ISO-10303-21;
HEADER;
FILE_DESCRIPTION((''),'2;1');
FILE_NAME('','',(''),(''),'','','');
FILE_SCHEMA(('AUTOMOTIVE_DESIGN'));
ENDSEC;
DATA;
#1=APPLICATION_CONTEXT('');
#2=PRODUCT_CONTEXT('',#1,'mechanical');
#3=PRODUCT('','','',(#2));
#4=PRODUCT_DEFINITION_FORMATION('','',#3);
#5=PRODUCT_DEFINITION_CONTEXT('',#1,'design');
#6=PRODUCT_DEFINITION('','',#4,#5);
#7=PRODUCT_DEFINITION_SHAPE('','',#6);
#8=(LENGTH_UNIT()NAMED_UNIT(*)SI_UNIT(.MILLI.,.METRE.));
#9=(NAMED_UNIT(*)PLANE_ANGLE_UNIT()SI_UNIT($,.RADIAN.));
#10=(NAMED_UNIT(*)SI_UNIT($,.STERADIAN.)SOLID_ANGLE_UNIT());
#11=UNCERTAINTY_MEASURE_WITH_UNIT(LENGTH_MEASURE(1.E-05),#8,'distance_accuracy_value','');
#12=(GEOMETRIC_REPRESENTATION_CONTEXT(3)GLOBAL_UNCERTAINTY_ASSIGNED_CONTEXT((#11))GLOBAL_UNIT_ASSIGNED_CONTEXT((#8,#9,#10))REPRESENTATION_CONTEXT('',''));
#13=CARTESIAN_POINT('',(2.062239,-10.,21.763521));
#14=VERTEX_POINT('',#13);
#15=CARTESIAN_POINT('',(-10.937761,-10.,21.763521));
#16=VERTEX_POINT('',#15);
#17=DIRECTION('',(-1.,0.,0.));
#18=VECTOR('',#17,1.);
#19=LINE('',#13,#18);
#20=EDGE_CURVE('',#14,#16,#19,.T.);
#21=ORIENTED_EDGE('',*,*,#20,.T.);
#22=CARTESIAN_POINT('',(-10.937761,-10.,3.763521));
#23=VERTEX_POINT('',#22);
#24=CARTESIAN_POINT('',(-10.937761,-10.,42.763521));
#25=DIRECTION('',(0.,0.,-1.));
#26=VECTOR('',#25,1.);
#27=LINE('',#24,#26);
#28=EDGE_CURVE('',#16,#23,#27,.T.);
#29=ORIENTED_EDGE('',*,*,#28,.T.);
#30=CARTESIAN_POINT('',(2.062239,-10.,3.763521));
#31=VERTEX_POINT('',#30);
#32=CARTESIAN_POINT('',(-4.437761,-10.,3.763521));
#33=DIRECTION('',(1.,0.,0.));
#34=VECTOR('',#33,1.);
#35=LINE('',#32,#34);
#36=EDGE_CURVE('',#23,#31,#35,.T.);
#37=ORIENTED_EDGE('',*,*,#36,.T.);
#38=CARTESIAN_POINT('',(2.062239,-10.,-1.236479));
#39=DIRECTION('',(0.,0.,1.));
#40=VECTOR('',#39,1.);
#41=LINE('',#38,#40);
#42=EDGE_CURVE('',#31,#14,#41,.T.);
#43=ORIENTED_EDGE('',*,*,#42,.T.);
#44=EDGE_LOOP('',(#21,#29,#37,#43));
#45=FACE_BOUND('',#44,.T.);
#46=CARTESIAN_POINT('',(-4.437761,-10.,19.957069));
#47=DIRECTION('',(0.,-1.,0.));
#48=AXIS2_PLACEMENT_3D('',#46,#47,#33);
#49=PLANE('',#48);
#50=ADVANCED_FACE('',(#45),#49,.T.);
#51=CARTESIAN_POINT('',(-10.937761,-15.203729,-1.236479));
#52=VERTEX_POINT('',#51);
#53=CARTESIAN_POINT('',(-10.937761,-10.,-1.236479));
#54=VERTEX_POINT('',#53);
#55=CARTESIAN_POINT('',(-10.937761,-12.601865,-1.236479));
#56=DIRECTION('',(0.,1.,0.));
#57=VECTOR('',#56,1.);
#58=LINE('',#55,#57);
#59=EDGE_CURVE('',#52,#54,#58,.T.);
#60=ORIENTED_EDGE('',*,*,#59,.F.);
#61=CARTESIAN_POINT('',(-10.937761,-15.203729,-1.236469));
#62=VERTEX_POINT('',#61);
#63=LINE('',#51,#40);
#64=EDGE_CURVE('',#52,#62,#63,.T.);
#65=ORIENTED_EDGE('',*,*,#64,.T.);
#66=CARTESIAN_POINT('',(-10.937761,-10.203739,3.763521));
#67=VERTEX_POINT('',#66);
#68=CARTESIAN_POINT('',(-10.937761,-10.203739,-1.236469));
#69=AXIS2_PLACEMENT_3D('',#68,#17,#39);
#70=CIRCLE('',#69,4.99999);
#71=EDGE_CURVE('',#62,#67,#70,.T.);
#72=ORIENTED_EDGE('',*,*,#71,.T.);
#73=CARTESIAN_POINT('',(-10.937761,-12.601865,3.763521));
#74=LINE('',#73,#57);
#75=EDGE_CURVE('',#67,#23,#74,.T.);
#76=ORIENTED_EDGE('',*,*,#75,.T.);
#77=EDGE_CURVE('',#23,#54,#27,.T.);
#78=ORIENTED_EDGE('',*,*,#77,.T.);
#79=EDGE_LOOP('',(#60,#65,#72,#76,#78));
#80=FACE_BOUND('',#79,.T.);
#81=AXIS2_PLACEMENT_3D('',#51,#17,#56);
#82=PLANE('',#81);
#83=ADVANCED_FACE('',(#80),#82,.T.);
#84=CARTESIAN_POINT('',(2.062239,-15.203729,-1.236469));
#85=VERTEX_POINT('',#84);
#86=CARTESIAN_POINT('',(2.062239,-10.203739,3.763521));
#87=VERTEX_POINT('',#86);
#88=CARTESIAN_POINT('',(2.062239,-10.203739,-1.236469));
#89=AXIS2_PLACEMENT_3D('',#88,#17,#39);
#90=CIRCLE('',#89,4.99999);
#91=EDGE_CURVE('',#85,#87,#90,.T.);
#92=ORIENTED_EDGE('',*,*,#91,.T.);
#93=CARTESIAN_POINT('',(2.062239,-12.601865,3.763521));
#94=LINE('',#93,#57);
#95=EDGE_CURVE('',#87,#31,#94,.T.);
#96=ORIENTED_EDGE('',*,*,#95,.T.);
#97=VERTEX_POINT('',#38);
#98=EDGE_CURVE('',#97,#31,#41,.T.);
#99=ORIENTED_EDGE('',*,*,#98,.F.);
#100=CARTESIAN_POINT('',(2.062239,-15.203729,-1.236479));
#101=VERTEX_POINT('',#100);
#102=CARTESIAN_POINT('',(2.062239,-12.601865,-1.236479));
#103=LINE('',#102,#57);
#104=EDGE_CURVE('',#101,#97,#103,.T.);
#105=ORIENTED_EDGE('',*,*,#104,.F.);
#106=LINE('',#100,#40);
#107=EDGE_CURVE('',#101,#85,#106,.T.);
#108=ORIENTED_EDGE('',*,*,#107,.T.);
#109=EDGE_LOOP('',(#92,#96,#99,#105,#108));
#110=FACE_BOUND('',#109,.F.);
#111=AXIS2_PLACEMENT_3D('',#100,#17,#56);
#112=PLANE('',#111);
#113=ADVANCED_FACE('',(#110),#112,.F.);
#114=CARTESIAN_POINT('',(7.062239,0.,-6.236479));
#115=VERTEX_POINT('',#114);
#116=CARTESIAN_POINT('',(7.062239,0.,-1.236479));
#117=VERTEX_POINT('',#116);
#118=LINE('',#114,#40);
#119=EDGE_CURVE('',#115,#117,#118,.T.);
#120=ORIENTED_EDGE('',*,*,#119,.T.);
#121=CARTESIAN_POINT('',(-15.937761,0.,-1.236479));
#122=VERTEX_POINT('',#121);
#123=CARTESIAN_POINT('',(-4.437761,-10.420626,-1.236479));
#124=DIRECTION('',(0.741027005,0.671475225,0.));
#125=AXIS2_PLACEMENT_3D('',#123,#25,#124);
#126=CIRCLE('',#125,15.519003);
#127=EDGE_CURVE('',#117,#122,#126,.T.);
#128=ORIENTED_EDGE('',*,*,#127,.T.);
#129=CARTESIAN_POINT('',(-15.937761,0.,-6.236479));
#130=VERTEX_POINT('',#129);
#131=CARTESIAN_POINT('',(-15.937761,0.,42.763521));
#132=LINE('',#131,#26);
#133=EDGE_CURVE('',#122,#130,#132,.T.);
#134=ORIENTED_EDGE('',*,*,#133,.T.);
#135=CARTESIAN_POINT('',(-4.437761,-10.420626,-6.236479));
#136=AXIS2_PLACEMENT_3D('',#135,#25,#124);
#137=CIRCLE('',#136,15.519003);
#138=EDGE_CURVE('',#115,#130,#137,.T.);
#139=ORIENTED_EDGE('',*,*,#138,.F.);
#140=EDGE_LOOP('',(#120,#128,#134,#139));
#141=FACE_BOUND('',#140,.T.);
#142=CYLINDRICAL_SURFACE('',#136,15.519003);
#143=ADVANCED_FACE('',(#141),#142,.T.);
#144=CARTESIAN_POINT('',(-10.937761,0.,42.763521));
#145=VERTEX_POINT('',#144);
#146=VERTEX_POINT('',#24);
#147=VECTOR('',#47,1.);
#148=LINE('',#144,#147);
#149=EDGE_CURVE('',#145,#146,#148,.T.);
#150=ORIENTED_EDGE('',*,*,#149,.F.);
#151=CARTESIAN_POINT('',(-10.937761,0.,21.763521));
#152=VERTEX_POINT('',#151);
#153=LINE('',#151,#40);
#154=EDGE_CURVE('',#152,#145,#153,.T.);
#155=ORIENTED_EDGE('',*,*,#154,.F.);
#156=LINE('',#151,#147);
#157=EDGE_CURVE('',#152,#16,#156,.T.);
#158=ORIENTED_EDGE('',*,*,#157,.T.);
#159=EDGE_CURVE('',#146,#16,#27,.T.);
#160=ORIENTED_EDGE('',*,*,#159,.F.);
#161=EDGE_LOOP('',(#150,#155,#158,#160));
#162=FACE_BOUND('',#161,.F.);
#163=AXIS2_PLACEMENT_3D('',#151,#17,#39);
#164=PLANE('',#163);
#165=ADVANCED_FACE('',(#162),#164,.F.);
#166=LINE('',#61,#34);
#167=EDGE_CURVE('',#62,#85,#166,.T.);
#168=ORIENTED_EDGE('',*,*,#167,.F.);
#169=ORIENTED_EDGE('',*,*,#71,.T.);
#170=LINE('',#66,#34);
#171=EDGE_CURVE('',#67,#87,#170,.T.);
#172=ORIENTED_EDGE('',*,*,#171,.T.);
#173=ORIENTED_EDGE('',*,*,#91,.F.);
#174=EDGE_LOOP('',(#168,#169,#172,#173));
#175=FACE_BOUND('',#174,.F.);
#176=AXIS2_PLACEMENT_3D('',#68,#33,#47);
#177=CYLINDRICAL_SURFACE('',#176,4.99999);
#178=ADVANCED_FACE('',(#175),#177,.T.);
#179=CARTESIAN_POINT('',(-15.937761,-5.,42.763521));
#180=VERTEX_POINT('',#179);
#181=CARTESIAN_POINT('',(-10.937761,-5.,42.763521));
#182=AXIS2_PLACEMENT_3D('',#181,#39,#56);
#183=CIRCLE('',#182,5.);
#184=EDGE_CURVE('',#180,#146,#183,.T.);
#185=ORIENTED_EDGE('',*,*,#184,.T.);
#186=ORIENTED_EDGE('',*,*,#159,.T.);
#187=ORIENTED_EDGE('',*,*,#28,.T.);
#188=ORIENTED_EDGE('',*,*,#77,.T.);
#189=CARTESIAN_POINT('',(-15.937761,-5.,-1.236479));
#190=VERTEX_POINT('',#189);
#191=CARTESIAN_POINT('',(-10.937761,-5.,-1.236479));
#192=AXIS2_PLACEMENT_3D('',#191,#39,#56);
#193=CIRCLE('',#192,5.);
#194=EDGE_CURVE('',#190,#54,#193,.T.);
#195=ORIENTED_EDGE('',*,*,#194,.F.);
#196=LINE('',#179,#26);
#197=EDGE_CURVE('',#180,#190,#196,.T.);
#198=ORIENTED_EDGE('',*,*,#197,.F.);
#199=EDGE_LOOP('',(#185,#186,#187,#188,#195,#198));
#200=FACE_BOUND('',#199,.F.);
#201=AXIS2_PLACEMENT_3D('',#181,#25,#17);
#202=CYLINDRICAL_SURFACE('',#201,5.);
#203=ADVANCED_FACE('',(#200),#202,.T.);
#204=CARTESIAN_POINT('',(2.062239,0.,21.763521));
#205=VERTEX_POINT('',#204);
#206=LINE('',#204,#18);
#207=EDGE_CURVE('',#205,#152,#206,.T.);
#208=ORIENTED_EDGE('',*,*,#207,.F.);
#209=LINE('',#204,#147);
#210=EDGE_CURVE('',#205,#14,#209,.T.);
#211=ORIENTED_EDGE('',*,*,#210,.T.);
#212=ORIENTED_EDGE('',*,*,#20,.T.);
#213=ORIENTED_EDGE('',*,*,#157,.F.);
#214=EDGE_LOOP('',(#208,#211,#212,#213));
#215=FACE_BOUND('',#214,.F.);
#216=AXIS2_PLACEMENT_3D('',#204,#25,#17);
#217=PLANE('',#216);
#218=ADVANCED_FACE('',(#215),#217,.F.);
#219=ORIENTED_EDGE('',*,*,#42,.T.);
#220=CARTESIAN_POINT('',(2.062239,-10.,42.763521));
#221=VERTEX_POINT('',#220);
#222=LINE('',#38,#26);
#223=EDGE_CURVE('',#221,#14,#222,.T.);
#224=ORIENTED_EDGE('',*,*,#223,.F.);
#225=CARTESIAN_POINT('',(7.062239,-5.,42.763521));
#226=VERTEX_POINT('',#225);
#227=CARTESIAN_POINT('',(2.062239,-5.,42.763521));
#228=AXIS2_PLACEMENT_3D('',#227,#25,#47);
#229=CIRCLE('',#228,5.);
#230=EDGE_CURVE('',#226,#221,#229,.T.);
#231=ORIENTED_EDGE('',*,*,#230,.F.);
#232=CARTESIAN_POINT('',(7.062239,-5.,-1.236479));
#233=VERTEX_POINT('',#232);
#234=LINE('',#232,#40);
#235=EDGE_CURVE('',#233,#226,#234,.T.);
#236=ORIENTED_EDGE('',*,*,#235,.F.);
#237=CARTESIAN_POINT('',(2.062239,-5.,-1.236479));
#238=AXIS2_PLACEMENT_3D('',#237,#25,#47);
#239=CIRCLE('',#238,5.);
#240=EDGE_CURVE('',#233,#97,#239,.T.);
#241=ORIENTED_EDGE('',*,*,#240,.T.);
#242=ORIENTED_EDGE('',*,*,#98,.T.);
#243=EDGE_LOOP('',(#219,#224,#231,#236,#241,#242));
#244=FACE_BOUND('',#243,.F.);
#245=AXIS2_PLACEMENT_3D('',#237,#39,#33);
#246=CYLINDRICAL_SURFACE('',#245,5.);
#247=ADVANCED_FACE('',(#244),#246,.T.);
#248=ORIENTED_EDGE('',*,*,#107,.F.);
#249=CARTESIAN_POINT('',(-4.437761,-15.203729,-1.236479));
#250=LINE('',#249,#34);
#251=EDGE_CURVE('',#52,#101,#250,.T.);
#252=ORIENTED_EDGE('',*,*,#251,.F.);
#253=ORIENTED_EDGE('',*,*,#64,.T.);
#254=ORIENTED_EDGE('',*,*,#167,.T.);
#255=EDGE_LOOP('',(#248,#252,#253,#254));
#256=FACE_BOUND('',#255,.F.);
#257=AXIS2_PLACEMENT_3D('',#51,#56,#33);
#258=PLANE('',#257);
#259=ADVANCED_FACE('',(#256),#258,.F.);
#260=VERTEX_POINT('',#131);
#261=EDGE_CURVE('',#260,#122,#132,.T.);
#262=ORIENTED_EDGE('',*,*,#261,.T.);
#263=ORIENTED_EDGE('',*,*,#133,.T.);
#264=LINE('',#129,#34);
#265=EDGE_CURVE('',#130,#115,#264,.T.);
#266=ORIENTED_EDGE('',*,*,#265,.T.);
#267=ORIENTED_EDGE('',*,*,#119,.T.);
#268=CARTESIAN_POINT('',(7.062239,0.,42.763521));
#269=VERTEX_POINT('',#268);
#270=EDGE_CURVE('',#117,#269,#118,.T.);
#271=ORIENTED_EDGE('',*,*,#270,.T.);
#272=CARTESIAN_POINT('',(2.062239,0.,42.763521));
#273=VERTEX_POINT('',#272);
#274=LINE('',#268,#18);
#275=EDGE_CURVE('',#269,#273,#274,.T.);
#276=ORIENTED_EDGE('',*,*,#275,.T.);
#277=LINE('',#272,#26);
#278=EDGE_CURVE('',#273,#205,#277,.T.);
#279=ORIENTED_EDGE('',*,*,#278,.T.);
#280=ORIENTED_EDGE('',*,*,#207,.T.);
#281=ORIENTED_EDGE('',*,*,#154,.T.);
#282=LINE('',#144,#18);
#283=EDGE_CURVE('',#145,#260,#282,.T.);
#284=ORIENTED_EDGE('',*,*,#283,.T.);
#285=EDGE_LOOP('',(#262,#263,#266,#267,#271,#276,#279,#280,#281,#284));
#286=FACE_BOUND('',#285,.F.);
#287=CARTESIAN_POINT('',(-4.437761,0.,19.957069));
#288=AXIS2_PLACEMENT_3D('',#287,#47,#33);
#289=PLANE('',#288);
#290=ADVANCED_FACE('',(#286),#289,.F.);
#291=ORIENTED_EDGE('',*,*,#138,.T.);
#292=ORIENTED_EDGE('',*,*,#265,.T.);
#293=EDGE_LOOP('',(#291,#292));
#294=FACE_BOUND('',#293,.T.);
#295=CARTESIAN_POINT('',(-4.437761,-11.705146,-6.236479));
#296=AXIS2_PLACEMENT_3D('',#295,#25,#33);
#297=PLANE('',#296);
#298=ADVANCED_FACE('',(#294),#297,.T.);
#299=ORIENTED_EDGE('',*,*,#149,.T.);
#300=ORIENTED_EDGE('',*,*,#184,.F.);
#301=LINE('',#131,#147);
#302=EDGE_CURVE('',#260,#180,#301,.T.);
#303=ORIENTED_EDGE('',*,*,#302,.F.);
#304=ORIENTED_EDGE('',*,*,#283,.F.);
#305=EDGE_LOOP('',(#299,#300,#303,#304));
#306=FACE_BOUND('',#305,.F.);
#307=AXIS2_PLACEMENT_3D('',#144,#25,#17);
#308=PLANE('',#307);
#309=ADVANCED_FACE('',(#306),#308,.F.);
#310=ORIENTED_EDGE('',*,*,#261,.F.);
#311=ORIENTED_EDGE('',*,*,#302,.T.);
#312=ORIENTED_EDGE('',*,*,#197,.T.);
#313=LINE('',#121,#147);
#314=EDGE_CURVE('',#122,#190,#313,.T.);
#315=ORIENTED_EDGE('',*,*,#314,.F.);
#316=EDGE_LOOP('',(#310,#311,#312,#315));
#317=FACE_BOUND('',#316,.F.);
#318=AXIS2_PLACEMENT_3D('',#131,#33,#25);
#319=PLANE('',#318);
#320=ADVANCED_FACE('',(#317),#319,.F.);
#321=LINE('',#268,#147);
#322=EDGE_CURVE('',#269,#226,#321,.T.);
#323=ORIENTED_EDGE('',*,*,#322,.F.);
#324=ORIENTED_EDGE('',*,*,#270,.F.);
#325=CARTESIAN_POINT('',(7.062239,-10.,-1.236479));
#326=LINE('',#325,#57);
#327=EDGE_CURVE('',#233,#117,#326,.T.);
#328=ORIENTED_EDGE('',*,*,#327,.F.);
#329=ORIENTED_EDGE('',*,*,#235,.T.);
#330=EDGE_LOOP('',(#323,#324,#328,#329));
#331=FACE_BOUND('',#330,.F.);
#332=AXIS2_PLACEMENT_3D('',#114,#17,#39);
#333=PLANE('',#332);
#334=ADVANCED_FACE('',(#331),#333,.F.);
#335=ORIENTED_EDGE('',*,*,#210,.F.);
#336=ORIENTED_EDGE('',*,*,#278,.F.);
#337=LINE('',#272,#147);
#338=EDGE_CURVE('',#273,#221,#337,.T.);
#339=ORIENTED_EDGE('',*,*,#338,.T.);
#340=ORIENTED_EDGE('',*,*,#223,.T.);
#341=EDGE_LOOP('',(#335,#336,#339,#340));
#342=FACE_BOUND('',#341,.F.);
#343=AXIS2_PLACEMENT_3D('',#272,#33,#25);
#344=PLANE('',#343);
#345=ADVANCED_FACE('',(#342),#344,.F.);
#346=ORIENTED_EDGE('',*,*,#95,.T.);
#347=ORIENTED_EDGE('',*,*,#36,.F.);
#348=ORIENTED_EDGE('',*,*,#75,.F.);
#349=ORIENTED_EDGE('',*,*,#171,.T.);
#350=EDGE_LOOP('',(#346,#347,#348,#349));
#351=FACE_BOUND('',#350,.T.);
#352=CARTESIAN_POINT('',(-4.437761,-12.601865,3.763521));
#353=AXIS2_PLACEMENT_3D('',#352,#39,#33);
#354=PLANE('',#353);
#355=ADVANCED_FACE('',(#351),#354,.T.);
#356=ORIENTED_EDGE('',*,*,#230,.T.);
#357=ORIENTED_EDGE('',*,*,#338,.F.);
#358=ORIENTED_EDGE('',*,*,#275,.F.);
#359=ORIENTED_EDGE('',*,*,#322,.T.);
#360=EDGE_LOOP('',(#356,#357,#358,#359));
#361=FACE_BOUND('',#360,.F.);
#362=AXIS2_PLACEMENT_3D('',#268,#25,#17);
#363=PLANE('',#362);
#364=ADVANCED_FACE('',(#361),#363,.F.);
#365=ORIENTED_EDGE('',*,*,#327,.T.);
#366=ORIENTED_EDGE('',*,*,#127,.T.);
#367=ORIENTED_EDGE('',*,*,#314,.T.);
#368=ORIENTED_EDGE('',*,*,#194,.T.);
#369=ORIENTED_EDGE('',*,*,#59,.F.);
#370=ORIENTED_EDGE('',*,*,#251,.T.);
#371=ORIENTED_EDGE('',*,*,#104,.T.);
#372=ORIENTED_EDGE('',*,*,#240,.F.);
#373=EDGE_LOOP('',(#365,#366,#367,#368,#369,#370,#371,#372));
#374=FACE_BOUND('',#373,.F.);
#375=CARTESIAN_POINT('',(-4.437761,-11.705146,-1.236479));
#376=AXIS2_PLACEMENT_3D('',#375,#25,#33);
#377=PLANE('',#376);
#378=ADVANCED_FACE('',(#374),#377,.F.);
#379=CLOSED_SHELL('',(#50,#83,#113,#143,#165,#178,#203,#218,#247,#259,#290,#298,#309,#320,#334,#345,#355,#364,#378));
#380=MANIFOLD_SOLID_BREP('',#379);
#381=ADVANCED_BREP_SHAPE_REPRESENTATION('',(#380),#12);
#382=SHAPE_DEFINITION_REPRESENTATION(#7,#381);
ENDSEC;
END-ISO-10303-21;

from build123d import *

# Parameters (mm, degrees)
F1_DEPTH = 10
F3_DEPTH = 5
F4_R     = 5
F5_W     = 13
F5_H     = 5.2037292719
F6_DEPTH = 5
F7_R     = 4.99999


# Not quite as in the source:
# - a fillet or chamfer is up to 0.001 mm smaller than in the source, because OpenCascade refuses the exact size


with BuildPart() as f1:
    # F0 (on Front) → F1 (new body)
    with BuildSketch(Plane.XZ):
        Polygon((-10.9377613165, 42.7635207549), (-15.9377613165, 42.7635207549), (-15.9377613165, -6.2364792451), (7.0622386835, -6.2364792451), (7.0622386835, 42.7635207549), (2.0622386835, 42.7635207549), (2.0622386835, 21.7635207549), (-10.9377613165, 21.7635207549), align=None)
    extrude(amount=F1_DEPTH)

    # F2 (on face) → F3 (join)
    with BuildSketch(Plane(origin=(0, 0, -6.2364792451), x_dir=(1, 0, 0), z_dir=(0, 0, -1))):
        with BuildLine():
            Line((7.0622386835, 10), (7.0622386835, 0))
            ThreePointArc((7.0622386835, 0), (-4.4377613165, 25.9396283258), (-15.9377613165, 0))
            Line((-15.9377613165, 0), (-15.9377613165, 10))
            Line((-15.9377613165, 10), (7.0622386835, 10))
        make_face()
    extrude(amount=-F3_DEPTH)

    # F4
    f4_edges = [f1.edges().sort_by_distance(p)[0] for p in [
        (-15.937761, -10, 20.763521),
        (7.062239, -10, 20.763521),
    ]]
    fillet(f4_edges, radius=F4_R)

    # F5 (on face) → F6 (join)
    with BuildSketch(Plane.XY.offset(-1.2364792451)):
        with Locations((-4.4377613165, -12.6018646359)):
            Rectangle(F5_W, F5_H)
    extrude(amount=F6_DEPTH)

    # F7 (radius 5 in the source; OpenCascade refuses exactly that, so slightly less here)
    f7_edges = [f1.edges().sort_by_distance(p)[0] for p in [
        (-4.437761, -15.203729, 3.763521),
    ]]
    fillet(f7_edges, radius=F7_R)


solid = f1.part
